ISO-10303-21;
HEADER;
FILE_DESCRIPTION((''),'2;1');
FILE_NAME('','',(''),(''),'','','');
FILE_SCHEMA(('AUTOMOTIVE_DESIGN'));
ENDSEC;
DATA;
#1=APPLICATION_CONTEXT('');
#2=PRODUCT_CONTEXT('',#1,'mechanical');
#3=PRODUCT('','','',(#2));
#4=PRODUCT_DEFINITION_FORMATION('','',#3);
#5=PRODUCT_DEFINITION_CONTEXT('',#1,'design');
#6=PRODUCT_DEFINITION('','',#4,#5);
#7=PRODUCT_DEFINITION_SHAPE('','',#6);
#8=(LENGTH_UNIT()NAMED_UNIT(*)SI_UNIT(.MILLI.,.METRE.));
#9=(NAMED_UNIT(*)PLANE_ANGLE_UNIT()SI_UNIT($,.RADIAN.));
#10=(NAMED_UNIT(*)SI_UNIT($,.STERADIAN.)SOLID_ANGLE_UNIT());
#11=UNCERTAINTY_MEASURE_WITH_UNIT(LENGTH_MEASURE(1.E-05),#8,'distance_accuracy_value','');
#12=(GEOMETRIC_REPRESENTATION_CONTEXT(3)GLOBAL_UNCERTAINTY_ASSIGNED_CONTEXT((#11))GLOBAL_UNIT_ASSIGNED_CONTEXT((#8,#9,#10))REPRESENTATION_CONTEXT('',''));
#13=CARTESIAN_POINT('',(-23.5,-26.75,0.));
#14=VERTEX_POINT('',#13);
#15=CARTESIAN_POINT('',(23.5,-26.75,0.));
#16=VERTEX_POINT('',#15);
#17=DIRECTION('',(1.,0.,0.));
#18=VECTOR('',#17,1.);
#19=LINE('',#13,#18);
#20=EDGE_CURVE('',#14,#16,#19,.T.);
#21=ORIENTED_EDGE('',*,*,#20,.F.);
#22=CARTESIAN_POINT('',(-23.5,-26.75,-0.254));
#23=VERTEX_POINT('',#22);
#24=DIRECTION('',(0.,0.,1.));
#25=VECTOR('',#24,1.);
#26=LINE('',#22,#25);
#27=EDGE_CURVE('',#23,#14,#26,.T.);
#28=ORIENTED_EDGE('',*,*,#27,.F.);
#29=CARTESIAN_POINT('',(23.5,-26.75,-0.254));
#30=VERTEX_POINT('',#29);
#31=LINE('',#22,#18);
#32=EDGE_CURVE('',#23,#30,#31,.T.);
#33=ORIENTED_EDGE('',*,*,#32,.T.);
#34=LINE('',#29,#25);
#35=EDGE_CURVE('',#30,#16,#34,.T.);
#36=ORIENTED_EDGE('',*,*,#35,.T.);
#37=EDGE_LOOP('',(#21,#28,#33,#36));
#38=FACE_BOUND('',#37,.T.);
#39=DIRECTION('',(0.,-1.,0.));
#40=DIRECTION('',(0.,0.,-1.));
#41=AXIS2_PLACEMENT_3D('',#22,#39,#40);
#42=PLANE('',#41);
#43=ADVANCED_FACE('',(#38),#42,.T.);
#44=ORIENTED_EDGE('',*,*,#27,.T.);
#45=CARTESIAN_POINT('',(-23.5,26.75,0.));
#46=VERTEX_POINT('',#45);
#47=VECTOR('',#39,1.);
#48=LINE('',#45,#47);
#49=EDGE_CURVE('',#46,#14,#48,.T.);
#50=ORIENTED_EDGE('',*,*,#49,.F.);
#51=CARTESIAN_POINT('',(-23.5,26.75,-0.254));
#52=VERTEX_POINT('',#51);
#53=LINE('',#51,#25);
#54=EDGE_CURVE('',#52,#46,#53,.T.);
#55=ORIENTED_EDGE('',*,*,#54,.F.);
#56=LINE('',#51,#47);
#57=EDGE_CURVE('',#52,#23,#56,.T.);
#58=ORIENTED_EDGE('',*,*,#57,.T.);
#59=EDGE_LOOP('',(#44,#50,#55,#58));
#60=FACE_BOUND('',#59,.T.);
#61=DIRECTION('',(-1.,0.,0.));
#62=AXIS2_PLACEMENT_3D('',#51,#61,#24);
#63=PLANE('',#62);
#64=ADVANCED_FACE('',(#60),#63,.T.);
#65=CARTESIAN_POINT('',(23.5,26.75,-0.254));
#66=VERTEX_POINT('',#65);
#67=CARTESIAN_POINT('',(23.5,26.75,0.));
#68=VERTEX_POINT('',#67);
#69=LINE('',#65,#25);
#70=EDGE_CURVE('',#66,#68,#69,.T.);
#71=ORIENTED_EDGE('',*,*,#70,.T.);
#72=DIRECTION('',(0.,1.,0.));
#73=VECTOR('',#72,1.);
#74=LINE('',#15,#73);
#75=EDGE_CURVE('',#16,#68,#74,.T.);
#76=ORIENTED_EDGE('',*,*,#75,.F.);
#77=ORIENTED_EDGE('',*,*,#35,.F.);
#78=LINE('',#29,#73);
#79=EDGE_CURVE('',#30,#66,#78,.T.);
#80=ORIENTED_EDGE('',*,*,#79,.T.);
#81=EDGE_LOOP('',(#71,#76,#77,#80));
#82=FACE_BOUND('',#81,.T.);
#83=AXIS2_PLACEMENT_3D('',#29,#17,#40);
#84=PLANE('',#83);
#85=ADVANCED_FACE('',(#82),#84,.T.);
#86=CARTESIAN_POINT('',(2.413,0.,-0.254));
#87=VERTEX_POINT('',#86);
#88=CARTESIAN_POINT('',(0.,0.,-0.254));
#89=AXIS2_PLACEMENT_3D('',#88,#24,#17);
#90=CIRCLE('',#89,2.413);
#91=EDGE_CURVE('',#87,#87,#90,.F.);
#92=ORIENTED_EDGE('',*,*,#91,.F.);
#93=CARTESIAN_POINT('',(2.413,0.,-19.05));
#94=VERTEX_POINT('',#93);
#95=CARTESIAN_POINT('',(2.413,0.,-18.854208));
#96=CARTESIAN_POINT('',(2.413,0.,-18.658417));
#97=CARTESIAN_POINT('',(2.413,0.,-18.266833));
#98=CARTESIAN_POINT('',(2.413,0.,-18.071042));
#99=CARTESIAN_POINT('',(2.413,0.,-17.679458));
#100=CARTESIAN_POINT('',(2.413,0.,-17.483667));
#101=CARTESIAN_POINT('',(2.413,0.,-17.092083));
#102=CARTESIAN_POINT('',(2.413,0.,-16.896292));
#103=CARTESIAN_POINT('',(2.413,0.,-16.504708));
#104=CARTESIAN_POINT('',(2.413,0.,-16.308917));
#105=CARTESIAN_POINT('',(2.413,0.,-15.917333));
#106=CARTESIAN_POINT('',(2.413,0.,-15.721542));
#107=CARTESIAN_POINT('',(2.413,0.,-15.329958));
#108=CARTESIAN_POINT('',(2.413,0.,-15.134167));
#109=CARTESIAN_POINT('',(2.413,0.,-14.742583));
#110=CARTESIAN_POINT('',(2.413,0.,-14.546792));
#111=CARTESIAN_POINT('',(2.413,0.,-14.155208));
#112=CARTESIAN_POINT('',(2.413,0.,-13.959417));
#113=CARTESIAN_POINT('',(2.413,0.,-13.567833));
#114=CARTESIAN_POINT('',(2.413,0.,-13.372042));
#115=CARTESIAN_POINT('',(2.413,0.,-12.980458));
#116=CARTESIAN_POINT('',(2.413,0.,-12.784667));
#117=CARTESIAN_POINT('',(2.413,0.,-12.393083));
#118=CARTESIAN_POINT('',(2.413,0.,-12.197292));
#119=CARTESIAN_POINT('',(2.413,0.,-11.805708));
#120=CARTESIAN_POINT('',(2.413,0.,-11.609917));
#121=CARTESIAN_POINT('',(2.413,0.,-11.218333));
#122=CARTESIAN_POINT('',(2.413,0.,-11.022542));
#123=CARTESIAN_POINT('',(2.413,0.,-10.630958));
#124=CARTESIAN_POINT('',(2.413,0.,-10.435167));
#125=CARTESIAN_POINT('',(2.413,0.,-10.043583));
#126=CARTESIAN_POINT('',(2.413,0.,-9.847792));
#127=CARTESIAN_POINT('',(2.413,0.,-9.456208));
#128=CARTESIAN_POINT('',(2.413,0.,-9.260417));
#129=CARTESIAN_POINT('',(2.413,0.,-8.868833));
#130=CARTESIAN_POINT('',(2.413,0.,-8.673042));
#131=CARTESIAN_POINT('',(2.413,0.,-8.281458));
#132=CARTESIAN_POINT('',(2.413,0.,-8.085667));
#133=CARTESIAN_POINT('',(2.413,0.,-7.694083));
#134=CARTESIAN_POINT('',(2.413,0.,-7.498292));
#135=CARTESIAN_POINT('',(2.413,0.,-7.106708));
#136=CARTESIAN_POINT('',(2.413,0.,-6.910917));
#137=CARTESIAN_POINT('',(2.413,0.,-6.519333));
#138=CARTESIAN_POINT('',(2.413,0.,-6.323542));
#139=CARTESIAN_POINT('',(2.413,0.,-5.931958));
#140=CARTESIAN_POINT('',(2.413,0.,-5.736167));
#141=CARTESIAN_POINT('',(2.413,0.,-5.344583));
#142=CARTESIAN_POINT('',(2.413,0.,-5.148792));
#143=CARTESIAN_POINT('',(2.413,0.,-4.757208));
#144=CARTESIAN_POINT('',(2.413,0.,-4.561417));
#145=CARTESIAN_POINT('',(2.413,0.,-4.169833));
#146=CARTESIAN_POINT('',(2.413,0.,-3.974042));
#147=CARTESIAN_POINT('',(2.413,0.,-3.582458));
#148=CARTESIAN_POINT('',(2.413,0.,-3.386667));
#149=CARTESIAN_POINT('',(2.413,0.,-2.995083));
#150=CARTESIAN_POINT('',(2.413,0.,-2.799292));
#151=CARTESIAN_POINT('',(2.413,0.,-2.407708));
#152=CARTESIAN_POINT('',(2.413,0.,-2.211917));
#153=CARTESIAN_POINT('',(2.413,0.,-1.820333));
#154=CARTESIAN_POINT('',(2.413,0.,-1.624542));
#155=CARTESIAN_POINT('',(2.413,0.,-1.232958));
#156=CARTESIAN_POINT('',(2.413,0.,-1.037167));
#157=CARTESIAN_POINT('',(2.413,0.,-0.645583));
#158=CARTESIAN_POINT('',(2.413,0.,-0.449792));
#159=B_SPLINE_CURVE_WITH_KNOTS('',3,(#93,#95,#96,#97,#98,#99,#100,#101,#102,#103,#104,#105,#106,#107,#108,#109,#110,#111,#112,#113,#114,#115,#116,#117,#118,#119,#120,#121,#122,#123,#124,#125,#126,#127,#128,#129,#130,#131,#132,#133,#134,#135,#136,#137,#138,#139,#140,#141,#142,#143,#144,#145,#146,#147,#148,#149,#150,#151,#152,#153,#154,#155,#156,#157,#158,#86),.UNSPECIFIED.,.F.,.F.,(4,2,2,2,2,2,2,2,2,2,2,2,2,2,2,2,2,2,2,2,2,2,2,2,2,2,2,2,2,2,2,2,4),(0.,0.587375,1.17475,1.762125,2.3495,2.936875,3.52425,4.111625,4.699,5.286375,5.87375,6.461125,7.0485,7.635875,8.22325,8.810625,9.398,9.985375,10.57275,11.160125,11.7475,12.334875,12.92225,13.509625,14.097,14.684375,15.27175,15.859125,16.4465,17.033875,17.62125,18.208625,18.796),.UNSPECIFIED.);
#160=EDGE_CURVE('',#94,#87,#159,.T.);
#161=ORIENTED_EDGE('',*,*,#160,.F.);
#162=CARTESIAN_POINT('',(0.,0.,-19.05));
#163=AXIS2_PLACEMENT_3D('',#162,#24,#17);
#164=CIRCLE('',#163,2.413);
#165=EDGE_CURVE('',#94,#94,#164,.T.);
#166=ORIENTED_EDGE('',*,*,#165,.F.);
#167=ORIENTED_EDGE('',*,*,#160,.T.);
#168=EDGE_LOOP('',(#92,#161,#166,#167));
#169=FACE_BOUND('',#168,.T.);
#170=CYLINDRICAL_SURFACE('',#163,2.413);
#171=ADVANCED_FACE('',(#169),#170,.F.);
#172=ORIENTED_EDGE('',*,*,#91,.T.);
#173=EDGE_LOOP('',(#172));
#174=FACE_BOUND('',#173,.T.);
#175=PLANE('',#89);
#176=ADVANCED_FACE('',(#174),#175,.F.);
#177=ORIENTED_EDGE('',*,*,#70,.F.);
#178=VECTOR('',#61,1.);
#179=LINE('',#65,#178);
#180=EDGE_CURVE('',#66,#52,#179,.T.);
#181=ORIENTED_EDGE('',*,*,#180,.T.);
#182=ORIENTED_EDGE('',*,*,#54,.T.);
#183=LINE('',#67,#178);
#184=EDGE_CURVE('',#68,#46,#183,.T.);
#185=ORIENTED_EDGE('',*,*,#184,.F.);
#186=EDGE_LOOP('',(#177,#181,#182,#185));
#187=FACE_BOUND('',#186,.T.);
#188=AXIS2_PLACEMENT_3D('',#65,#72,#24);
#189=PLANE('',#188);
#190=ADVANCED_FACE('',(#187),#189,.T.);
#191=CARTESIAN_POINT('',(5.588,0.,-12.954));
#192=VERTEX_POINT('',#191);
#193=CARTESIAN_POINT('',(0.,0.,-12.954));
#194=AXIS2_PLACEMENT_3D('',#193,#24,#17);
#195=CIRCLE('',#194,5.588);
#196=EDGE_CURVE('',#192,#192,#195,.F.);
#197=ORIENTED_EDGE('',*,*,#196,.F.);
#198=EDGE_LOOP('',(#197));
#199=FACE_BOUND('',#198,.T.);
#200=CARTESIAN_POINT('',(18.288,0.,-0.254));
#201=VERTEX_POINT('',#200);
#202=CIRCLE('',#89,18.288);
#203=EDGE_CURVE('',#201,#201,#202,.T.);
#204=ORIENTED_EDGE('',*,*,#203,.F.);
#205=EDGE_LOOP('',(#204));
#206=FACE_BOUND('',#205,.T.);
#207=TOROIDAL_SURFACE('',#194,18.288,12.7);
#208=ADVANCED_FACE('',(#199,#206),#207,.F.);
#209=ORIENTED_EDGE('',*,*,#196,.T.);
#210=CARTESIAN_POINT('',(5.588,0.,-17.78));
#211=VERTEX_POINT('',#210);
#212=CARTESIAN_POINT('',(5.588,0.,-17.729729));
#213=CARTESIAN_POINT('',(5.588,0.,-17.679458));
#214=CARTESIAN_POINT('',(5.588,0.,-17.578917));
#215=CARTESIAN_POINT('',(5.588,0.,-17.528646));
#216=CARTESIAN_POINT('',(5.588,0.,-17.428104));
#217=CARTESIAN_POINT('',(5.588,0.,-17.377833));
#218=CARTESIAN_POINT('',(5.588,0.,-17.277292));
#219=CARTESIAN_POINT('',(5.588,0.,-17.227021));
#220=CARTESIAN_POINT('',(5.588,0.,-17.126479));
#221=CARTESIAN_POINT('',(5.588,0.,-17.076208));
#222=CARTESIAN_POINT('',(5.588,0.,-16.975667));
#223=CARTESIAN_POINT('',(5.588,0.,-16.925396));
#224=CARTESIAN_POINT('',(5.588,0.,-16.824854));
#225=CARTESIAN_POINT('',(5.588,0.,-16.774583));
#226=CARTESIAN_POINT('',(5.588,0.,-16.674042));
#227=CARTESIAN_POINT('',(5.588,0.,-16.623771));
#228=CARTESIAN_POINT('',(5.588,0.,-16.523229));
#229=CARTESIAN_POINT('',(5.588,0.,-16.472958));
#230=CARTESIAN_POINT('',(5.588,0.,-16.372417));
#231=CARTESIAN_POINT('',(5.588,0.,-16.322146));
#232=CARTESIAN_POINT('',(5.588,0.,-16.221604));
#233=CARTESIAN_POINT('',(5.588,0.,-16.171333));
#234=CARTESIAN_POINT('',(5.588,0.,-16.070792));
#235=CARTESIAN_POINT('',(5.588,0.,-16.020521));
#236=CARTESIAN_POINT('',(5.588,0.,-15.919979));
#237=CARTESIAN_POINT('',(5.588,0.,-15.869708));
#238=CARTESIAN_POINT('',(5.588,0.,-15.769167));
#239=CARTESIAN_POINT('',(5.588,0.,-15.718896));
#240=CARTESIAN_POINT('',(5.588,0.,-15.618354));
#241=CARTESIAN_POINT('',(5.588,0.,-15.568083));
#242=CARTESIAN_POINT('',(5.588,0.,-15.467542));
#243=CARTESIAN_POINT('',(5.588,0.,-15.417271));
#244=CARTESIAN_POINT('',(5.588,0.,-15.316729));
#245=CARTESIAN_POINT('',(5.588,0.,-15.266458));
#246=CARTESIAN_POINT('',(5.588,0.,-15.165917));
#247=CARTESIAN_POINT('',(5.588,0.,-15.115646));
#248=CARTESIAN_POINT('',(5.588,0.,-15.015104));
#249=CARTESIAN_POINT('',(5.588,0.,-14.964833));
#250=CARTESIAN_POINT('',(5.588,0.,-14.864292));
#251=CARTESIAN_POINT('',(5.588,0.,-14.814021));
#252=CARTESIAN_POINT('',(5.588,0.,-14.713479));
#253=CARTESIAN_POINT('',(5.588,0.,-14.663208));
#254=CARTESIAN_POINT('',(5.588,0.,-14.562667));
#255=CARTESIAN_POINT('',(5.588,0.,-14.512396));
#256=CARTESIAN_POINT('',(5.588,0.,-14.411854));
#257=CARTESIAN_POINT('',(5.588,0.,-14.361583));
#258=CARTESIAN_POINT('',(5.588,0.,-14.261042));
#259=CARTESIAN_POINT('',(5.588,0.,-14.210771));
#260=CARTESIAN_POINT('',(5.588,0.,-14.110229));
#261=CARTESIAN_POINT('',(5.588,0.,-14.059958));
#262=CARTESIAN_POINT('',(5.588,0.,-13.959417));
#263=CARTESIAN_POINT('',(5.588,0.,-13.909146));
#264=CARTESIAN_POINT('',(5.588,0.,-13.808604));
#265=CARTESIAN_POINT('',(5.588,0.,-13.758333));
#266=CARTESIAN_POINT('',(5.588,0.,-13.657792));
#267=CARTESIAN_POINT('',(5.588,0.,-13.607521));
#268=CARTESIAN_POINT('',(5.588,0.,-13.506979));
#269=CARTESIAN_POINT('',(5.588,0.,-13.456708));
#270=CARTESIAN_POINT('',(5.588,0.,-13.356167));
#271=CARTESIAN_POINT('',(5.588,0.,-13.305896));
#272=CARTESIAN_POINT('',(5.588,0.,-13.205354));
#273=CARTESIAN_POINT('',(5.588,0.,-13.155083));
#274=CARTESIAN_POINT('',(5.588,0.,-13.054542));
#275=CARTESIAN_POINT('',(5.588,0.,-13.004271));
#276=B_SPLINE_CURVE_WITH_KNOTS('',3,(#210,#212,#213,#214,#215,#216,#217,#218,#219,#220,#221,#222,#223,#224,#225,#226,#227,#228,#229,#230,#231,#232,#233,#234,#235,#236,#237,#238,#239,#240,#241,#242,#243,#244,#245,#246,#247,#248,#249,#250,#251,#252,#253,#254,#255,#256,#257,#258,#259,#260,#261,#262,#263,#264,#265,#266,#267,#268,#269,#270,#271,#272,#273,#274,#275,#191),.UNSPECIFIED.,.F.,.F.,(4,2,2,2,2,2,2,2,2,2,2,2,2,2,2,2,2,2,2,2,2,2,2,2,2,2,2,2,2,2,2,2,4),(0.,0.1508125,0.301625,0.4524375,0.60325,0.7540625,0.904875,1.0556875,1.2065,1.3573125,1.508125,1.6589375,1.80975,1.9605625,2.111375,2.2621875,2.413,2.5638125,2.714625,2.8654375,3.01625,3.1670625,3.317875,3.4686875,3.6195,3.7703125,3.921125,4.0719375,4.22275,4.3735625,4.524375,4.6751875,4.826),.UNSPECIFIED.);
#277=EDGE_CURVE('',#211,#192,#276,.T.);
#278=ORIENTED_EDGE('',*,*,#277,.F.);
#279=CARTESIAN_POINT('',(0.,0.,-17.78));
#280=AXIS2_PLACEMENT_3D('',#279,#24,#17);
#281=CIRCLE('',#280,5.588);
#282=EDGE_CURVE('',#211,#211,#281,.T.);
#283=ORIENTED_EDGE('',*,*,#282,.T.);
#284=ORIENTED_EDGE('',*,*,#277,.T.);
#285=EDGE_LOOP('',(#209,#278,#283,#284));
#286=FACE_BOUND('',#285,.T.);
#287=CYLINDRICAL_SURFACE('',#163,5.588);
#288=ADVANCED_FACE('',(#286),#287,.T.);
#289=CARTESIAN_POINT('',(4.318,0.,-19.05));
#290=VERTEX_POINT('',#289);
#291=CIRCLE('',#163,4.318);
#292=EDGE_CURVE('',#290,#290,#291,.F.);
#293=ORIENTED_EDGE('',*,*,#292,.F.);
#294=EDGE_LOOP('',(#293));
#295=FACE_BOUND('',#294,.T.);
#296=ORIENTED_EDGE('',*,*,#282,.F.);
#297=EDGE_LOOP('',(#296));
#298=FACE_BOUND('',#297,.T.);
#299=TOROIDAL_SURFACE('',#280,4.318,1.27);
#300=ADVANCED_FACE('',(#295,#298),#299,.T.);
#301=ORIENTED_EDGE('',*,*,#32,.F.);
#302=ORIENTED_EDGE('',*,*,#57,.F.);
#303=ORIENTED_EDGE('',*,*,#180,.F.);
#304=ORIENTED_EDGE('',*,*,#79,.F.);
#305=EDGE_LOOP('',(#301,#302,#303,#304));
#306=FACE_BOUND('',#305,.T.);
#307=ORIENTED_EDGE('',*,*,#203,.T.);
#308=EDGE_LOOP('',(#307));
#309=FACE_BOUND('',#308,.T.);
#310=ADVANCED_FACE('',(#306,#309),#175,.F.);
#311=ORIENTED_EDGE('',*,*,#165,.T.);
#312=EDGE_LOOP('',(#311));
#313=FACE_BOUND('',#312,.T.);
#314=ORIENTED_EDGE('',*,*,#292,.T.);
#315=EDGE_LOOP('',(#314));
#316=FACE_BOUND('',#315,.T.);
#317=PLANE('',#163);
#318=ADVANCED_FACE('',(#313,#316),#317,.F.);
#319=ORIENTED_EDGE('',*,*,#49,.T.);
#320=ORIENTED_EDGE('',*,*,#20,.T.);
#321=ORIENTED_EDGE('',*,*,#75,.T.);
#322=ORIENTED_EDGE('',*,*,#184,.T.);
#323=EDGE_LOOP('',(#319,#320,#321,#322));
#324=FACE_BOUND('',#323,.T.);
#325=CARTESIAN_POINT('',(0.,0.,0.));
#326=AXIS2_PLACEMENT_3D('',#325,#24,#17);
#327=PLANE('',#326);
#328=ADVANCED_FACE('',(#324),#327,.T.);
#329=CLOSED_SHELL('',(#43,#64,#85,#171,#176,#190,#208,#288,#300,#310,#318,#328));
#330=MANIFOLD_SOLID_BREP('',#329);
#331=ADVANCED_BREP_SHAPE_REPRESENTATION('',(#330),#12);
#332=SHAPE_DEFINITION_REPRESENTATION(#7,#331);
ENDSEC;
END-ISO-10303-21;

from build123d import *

# Parameters (mm, degrees)
BOSS_EXTRUDE1_START       = -19.05
BOSS_EXTRUDE1_OUTLINE_R   = 5.588
BOSS_EXTRUDE1_OUTLINE_R_2 = 2.413
BOSS_EXTRUDE1_DEPTH       = 19.05
SKETCH16_W                = 47
SKETCH16_H                = 53.5
BOSS_EXTRUDE2_DEPTH       = 0.254
FILLET1_R                 = 12.7
FILLET3_R                 = 1.27


# Read off the part's stored shape, not the designer's step: Boss-Extrude1
with BuildPart() as part:
    # Boss-Extrude1 outline → Boss-Extrude1 (new body)
    with BuildSketch(Plane.XY.offset(BOSS_EXTRUDE1_START)):
        Circle(BOSS_EXTRUDE1_OUTLINE_R)
        Circle(BOSS_EXTRUDE1_OUTLINE_R_2, mode=Mode.SUBTRACT)
    extrude(amount=BOSS_EXTRUDE1_DEPTH)

    # Sketch16 → Boss-Extrude2 (add)
    with BuildSketch(Plane.XY):
        Rectangle(SKETCH16_W, SKETCH16_H)
    extrude(amount=-BOSS_EXTRUDE2_DEPTH)

    # Fillet1
    fillet1_edges = [part.edges().sort_by_distance(p)[0] for p in [
        (-5.588, 0, -0.254),
    ]]
    fillet(fillet1_edges, radius=FILLET1_R)

    # Fillet3
    fillet3_edges = [part.edges().sort_by_distance(p)[0] for p in [
        (-5.588, 0, -19.05),
    ]]
    fillet(fillet3_edges, radius=FILLET3_R)


solid = part.part
